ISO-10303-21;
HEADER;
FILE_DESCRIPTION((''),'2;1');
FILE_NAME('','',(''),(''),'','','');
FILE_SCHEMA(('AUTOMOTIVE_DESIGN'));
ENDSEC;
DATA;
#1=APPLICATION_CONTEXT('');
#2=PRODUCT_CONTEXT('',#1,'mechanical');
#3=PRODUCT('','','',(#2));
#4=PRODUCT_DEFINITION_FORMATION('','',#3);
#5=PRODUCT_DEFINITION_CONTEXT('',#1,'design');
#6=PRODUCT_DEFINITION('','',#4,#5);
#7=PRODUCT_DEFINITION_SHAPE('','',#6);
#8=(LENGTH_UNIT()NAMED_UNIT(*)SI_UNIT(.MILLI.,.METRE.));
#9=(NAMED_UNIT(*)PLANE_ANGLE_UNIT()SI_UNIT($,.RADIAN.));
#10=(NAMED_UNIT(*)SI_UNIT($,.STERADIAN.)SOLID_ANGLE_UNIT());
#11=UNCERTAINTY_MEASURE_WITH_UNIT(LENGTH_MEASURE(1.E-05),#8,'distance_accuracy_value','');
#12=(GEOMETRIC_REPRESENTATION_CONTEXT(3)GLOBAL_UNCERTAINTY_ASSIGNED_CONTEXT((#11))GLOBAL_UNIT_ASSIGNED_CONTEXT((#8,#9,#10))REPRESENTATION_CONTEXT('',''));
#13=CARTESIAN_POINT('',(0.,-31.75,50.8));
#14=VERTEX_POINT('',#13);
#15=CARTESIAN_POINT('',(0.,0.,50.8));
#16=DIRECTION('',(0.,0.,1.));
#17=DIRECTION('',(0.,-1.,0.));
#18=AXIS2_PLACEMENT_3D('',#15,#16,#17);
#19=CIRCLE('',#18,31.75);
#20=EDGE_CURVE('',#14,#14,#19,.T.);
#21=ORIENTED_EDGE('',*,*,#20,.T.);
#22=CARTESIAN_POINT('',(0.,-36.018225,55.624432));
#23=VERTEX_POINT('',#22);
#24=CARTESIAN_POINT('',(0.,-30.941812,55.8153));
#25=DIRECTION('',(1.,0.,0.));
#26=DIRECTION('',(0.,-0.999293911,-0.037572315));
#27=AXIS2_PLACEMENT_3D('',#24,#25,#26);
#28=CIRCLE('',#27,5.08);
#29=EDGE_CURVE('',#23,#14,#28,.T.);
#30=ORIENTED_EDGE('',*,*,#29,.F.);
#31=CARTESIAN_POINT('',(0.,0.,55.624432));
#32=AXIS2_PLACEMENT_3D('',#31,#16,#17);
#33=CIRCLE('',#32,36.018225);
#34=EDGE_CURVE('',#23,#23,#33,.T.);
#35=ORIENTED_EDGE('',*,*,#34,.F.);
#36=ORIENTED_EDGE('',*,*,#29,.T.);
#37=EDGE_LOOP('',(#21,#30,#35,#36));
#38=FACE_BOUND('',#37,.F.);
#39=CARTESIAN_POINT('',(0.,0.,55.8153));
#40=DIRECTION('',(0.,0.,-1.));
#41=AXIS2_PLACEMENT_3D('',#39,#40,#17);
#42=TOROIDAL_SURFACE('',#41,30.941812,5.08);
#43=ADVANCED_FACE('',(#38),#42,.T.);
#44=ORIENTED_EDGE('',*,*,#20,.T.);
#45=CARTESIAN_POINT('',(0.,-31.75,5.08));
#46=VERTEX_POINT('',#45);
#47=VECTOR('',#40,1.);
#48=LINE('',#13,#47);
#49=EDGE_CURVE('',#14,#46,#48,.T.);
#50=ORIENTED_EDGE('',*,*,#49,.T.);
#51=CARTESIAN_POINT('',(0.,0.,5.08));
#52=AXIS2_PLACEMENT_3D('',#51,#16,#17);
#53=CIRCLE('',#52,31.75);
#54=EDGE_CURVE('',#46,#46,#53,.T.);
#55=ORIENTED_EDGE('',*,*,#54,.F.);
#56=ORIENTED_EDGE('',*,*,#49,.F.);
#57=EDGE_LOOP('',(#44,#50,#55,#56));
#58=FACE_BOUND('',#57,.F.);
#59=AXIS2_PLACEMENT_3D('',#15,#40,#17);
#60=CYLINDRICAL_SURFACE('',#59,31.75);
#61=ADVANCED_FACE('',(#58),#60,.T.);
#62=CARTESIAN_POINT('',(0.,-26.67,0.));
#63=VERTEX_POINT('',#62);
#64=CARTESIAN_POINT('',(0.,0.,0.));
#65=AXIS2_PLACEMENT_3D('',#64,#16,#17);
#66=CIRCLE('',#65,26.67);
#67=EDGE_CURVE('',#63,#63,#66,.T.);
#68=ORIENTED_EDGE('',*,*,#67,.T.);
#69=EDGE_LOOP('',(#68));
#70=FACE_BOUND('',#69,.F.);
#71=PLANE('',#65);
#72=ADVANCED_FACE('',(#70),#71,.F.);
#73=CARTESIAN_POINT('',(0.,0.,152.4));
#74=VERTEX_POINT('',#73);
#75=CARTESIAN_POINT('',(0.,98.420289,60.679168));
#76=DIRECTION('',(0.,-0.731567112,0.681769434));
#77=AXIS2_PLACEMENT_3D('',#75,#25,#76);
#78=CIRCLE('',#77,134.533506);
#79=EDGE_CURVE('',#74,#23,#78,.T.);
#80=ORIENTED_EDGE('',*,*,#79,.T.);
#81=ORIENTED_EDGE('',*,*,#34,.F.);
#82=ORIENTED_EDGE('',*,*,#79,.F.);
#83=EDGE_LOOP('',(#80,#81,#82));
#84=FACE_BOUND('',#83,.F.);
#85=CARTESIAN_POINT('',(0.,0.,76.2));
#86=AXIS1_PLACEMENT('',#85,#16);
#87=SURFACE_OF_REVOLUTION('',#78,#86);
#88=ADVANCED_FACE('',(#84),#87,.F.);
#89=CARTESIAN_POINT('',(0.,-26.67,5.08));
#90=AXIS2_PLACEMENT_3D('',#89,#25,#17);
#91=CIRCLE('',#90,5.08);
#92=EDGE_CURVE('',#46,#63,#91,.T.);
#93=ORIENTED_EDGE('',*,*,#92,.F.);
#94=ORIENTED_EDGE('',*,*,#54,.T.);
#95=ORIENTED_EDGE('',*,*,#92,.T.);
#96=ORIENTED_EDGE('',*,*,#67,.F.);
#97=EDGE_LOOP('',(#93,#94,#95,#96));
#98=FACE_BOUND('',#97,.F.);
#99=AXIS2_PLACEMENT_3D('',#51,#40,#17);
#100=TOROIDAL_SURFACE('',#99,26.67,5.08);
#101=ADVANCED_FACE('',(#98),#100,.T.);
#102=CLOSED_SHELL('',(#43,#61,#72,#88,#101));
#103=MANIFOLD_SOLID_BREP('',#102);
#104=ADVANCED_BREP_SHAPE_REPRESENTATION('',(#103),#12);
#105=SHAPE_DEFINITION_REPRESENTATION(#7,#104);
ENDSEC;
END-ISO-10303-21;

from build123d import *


# Not quite as in the source:
# - a fillet or chamfer that OpenCascade refuses, or shapes differently, is made with other operations: its cross-section is extruded or revolved along the edge and cut away or added


with BuildPart() as f1:
    # F0 (on Right) → F1 (revolve)
    with BuildSketch(Plane.YZ):
        with BuildLine():
            Line((-31.75, 0), (0, 0))
            Line((0, 0), (0, 152.4))
            ThreePointArc((0, 152.4), (-28.4861105744, 105.3337323133), (-35.75, 50.8))
            Line((-35.75, 50.8), (-31.75, 50.8))
            Line((-31.75, 50.8), (-31.75, 0))
        make_face()
    revolve(axis=Axis((0, 0, 76.2), (0, 0, 1)))

    # F2: fillet of radius 5.08 on 2 edges, made by hand

    # F2_s1 → F2_t2 (revolve, cut)
    with BuildSketch(Plane.YZ):
        with BuildLine():
            ThreePointArc((-36.0182250356, 55.6244324438), (-34.7465352987, 52.4492219117), (-31.75, 50.8))
            Line((-31.75, 50.8), (-35.75, 50.8))
            ThreePointArc((-35.75, 50.8), (-35.9057734532, 53.2110119341), (-36.0182250356, 55.6244324438))
        make_face()
    revolve(axis=Axis((0, 0, 50.8), (0, 0, 1)), mode=Mode.SUBTRACT)

    # F2_s3 → F2_t4 (revolve, cut)
    with BuildSketch(Plane.YZ):
        with BuildLine():
            ThreePointArc((-31.75, 5.08), (-30.2621024484, 1.4878975516), (-26.67, 0))
            Line((-26.67, 0), (-31.75, 0))
            Line((-31.75, 0), (-31.75, 5.08))
        make_face()
    revolve(axis=Axis((0, 0, 0), (0, 0, 1)), mode=Mode.SUBTRACT)


solid = f1.part
